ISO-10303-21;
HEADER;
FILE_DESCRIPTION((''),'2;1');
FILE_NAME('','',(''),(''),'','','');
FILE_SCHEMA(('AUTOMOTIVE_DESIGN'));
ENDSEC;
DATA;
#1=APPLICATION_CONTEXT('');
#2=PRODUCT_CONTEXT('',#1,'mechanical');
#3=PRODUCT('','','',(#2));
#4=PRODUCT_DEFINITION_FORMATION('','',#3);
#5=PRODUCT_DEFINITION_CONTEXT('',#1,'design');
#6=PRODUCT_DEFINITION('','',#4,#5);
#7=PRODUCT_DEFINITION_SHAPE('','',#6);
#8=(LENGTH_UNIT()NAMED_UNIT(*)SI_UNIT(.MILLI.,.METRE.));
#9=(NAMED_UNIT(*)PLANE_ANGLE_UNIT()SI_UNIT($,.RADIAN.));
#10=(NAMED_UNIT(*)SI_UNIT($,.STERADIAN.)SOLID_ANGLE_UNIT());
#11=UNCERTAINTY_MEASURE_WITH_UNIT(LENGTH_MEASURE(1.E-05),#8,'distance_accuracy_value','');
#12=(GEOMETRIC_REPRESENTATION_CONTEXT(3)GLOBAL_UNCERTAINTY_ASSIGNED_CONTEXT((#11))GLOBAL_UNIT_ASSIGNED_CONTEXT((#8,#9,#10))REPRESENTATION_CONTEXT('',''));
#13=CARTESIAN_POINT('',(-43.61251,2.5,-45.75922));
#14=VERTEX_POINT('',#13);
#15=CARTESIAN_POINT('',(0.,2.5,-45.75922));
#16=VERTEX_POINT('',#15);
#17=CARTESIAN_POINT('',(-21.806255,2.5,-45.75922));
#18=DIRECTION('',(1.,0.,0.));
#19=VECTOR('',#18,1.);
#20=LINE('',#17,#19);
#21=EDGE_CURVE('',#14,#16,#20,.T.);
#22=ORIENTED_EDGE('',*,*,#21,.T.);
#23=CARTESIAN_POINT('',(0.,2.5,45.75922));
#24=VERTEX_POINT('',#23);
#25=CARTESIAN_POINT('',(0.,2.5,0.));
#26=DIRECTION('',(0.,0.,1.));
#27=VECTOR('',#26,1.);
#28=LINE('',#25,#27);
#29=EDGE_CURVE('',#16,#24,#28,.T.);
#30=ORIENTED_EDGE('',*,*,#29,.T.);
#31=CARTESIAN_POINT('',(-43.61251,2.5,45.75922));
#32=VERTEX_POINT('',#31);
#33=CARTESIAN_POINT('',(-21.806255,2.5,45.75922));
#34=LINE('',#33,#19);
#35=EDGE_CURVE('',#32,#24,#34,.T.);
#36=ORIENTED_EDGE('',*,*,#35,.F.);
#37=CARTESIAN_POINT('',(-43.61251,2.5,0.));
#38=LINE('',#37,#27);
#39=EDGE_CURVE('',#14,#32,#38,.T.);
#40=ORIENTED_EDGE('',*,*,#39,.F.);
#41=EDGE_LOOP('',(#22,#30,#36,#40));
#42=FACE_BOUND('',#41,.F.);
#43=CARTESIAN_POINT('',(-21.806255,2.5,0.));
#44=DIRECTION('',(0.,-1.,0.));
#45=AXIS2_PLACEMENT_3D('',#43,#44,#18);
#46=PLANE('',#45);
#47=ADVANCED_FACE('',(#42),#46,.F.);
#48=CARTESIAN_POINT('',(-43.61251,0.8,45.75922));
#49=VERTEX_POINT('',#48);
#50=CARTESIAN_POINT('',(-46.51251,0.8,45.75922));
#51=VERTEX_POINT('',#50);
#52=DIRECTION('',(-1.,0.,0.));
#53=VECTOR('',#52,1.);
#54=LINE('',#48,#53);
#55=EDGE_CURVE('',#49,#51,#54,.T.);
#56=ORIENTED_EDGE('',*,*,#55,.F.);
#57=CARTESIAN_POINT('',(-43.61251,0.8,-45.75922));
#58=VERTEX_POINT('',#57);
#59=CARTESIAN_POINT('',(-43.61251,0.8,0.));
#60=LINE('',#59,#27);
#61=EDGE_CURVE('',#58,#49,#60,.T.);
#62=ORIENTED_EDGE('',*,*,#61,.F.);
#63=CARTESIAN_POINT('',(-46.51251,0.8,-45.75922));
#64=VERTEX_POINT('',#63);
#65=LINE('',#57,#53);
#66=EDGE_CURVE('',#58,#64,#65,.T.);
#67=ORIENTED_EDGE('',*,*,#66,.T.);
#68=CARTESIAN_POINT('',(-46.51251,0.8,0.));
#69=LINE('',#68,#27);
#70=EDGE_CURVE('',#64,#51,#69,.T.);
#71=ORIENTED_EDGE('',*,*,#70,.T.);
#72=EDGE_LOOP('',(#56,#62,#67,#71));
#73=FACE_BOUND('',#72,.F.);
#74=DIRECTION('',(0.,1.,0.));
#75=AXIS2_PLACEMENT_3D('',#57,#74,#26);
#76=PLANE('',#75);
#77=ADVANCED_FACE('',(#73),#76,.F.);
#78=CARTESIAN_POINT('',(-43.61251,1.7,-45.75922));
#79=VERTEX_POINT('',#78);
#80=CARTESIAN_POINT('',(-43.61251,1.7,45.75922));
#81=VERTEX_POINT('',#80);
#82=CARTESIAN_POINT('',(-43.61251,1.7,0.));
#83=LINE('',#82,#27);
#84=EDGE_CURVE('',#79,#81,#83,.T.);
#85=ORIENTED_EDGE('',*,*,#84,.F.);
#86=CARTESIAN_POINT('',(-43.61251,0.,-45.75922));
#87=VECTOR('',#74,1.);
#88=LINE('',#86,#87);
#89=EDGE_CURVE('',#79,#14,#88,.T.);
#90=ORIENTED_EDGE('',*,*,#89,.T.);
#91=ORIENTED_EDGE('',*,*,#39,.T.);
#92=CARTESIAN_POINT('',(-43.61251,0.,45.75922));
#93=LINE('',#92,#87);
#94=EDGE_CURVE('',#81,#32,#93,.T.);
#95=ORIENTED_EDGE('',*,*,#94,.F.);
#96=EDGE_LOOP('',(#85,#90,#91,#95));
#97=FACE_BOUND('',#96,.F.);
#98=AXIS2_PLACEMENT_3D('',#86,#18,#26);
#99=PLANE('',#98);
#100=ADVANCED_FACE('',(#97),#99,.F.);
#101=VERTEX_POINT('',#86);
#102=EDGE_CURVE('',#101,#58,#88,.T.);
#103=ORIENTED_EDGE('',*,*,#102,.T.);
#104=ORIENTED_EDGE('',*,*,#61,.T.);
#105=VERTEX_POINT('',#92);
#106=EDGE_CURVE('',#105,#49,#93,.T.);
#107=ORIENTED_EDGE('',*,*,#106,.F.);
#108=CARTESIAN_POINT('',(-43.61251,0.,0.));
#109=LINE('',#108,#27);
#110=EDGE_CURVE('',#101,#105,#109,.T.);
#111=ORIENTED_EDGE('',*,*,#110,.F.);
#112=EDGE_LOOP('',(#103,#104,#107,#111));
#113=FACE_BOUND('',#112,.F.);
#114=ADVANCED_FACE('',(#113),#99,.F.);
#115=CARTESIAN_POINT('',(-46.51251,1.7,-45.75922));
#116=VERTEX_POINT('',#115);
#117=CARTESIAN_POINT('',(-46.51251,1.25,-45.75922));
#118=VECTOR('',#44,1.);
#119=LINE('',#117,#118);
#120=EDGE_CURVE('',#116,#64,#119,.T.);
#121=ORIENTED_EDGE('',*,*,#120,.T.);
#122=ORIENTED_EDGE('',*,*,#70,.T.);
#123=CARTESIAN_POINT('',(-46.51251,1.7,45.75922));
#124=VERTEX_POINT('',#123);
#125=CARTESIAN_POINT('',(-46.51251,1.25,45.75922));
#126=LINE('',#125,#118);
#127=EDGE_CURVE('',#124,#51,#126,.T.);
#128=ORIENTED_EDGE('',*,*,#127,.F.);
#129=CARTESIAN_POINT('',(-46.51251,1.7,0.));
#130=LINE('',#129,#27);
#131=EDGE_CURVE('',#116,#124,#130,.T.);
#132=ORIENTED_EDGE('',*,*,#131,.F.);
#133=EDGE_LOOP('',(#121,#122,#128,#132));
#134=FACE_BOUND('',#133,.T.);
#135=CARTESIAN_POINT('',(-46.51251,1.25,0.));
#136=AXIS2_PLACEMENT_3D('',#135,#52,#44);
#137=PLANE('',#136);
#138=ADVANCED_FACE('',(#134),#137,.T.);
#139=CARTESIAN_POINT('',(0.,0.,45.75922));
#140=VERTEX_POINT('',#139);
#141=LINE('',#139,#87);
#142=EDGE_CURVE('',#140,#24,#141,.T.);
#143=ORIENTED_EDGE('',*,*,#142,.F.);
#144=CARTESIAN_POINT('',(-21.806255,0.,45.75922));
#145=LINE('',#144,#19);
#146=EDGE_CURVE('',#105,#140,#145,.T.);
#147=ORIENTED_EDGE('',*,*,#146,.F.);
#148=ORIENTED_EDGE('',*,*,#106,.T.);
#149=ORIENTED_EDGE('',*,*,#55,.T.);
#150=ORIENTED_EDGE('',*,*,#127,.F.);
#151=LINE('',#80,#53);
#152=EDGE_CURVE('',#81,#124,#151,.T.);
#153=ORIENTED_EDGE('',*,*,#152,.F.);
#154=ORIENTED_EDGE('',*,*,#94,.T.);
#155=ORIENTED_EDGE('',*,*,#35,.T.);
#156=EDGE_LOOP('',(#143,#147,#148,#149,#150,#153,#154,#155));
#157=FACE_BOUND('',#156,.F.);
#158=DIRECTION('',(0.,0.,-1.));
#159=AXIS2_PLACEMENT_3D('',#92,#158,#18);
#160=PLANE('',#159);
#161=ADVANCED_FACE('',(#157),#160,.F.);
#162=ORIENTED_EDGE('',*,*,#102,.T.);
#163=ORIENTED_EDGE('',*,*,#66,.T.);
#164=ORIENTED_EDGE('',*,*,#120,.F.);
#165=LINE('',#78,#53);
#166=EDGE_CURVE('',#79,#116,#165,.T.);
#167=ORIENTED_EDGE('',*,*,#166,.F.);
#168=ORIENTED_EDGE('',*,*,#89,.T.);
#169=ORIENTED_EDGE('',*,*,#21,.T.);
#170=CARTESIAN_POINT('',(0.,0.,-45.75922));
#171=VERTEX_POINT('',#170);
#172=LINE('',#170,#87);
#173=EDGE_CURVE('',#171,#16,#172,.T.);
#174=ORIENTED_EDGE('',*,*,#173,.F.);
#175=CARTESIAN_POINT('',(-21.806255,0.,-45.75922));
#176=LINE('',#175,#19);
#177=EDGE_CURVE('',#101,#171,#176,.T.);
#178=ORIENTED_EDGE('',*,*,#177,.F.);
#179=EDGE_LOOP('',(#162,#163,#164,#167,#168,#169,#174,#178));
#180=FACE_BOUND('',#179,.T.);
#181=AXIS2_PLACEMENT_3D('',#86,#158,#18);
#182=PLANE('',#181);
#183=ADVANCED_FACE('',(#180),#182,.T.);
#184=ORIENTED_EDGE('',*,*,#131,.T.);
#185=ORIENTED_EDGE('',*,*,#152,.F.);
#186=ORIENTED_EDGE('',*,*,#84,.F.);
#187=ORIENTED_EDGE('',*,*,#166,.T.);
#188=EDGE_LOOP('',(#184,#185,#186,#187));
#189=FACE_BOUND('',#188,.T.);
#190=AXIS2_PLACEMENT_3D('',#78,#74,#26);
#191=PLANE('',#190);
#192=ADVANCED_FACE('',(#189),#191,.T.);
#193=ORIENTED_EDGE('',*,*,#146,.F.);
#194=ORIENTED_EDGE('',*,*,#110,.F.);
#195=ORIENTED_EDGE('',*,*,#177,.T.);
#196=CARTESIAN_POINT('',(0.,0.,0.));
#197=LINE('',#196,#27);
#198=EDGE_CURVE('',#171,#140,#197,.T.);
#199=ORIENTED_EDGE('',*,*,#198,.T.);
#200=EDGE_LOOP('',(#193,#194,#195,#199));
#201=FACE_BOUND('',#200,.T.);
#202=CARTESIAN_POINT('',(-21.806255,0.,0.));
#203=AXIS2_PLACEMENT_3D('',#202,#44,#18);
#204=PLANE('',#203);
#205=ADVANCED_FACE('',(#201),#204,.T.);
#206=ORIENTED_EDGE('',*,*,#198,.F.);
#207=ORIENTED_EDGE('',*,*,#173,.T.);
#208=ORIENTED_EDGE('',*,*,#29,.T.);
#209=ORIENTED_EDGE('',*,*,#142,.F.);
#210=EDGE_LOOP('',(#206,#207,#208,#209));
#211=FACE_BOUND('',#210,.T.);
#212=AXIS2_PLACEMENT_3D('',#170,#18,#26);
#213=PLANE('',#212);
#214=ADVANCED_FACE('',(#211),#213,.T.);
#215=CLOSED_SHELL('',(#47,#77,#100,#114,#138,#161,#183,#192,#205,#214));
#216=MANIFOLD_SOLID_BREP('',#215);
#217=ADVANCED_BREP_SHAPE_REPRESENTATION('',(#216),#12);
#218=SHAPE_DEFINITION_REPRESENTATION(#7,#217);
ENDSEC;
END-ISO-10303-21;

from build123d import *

# Parameters (mm, degrees)
F0_W     = 43.6125099659
F0_H     = 91.5184393525
F1_DEPTH = 2.5
F2_W     = 0.9
F2_H     = 91.5184393525
F3_DEPTH = 2.9


# Not quite as in the source:
# - a feature of the source that left no trace in its solid (it failed there, or was rolled back) is left out


with BuildPart() as f1:
    # F0 (on Front) → F1 (new body)
    with BuildSketch(Plane.XZ):
        with Locations((-21.8062549829, 0)):
            Rectangle(F0_W, F0_H)
    extrude(amount=-F1_DEPTH)

    # F2 (on face) → F3 (join)
    with BuildSketch(Plane(origin=(-43.6125099659, 0, 0), x_dir=(0, -1, 0), z_dir=(-1, 0, 0))):
        with Locations((-1.25, 0)):
            Rectangle(F2_W, F2_H)
    extrude(amount=F3_DEPTH)


solid = f1.part
